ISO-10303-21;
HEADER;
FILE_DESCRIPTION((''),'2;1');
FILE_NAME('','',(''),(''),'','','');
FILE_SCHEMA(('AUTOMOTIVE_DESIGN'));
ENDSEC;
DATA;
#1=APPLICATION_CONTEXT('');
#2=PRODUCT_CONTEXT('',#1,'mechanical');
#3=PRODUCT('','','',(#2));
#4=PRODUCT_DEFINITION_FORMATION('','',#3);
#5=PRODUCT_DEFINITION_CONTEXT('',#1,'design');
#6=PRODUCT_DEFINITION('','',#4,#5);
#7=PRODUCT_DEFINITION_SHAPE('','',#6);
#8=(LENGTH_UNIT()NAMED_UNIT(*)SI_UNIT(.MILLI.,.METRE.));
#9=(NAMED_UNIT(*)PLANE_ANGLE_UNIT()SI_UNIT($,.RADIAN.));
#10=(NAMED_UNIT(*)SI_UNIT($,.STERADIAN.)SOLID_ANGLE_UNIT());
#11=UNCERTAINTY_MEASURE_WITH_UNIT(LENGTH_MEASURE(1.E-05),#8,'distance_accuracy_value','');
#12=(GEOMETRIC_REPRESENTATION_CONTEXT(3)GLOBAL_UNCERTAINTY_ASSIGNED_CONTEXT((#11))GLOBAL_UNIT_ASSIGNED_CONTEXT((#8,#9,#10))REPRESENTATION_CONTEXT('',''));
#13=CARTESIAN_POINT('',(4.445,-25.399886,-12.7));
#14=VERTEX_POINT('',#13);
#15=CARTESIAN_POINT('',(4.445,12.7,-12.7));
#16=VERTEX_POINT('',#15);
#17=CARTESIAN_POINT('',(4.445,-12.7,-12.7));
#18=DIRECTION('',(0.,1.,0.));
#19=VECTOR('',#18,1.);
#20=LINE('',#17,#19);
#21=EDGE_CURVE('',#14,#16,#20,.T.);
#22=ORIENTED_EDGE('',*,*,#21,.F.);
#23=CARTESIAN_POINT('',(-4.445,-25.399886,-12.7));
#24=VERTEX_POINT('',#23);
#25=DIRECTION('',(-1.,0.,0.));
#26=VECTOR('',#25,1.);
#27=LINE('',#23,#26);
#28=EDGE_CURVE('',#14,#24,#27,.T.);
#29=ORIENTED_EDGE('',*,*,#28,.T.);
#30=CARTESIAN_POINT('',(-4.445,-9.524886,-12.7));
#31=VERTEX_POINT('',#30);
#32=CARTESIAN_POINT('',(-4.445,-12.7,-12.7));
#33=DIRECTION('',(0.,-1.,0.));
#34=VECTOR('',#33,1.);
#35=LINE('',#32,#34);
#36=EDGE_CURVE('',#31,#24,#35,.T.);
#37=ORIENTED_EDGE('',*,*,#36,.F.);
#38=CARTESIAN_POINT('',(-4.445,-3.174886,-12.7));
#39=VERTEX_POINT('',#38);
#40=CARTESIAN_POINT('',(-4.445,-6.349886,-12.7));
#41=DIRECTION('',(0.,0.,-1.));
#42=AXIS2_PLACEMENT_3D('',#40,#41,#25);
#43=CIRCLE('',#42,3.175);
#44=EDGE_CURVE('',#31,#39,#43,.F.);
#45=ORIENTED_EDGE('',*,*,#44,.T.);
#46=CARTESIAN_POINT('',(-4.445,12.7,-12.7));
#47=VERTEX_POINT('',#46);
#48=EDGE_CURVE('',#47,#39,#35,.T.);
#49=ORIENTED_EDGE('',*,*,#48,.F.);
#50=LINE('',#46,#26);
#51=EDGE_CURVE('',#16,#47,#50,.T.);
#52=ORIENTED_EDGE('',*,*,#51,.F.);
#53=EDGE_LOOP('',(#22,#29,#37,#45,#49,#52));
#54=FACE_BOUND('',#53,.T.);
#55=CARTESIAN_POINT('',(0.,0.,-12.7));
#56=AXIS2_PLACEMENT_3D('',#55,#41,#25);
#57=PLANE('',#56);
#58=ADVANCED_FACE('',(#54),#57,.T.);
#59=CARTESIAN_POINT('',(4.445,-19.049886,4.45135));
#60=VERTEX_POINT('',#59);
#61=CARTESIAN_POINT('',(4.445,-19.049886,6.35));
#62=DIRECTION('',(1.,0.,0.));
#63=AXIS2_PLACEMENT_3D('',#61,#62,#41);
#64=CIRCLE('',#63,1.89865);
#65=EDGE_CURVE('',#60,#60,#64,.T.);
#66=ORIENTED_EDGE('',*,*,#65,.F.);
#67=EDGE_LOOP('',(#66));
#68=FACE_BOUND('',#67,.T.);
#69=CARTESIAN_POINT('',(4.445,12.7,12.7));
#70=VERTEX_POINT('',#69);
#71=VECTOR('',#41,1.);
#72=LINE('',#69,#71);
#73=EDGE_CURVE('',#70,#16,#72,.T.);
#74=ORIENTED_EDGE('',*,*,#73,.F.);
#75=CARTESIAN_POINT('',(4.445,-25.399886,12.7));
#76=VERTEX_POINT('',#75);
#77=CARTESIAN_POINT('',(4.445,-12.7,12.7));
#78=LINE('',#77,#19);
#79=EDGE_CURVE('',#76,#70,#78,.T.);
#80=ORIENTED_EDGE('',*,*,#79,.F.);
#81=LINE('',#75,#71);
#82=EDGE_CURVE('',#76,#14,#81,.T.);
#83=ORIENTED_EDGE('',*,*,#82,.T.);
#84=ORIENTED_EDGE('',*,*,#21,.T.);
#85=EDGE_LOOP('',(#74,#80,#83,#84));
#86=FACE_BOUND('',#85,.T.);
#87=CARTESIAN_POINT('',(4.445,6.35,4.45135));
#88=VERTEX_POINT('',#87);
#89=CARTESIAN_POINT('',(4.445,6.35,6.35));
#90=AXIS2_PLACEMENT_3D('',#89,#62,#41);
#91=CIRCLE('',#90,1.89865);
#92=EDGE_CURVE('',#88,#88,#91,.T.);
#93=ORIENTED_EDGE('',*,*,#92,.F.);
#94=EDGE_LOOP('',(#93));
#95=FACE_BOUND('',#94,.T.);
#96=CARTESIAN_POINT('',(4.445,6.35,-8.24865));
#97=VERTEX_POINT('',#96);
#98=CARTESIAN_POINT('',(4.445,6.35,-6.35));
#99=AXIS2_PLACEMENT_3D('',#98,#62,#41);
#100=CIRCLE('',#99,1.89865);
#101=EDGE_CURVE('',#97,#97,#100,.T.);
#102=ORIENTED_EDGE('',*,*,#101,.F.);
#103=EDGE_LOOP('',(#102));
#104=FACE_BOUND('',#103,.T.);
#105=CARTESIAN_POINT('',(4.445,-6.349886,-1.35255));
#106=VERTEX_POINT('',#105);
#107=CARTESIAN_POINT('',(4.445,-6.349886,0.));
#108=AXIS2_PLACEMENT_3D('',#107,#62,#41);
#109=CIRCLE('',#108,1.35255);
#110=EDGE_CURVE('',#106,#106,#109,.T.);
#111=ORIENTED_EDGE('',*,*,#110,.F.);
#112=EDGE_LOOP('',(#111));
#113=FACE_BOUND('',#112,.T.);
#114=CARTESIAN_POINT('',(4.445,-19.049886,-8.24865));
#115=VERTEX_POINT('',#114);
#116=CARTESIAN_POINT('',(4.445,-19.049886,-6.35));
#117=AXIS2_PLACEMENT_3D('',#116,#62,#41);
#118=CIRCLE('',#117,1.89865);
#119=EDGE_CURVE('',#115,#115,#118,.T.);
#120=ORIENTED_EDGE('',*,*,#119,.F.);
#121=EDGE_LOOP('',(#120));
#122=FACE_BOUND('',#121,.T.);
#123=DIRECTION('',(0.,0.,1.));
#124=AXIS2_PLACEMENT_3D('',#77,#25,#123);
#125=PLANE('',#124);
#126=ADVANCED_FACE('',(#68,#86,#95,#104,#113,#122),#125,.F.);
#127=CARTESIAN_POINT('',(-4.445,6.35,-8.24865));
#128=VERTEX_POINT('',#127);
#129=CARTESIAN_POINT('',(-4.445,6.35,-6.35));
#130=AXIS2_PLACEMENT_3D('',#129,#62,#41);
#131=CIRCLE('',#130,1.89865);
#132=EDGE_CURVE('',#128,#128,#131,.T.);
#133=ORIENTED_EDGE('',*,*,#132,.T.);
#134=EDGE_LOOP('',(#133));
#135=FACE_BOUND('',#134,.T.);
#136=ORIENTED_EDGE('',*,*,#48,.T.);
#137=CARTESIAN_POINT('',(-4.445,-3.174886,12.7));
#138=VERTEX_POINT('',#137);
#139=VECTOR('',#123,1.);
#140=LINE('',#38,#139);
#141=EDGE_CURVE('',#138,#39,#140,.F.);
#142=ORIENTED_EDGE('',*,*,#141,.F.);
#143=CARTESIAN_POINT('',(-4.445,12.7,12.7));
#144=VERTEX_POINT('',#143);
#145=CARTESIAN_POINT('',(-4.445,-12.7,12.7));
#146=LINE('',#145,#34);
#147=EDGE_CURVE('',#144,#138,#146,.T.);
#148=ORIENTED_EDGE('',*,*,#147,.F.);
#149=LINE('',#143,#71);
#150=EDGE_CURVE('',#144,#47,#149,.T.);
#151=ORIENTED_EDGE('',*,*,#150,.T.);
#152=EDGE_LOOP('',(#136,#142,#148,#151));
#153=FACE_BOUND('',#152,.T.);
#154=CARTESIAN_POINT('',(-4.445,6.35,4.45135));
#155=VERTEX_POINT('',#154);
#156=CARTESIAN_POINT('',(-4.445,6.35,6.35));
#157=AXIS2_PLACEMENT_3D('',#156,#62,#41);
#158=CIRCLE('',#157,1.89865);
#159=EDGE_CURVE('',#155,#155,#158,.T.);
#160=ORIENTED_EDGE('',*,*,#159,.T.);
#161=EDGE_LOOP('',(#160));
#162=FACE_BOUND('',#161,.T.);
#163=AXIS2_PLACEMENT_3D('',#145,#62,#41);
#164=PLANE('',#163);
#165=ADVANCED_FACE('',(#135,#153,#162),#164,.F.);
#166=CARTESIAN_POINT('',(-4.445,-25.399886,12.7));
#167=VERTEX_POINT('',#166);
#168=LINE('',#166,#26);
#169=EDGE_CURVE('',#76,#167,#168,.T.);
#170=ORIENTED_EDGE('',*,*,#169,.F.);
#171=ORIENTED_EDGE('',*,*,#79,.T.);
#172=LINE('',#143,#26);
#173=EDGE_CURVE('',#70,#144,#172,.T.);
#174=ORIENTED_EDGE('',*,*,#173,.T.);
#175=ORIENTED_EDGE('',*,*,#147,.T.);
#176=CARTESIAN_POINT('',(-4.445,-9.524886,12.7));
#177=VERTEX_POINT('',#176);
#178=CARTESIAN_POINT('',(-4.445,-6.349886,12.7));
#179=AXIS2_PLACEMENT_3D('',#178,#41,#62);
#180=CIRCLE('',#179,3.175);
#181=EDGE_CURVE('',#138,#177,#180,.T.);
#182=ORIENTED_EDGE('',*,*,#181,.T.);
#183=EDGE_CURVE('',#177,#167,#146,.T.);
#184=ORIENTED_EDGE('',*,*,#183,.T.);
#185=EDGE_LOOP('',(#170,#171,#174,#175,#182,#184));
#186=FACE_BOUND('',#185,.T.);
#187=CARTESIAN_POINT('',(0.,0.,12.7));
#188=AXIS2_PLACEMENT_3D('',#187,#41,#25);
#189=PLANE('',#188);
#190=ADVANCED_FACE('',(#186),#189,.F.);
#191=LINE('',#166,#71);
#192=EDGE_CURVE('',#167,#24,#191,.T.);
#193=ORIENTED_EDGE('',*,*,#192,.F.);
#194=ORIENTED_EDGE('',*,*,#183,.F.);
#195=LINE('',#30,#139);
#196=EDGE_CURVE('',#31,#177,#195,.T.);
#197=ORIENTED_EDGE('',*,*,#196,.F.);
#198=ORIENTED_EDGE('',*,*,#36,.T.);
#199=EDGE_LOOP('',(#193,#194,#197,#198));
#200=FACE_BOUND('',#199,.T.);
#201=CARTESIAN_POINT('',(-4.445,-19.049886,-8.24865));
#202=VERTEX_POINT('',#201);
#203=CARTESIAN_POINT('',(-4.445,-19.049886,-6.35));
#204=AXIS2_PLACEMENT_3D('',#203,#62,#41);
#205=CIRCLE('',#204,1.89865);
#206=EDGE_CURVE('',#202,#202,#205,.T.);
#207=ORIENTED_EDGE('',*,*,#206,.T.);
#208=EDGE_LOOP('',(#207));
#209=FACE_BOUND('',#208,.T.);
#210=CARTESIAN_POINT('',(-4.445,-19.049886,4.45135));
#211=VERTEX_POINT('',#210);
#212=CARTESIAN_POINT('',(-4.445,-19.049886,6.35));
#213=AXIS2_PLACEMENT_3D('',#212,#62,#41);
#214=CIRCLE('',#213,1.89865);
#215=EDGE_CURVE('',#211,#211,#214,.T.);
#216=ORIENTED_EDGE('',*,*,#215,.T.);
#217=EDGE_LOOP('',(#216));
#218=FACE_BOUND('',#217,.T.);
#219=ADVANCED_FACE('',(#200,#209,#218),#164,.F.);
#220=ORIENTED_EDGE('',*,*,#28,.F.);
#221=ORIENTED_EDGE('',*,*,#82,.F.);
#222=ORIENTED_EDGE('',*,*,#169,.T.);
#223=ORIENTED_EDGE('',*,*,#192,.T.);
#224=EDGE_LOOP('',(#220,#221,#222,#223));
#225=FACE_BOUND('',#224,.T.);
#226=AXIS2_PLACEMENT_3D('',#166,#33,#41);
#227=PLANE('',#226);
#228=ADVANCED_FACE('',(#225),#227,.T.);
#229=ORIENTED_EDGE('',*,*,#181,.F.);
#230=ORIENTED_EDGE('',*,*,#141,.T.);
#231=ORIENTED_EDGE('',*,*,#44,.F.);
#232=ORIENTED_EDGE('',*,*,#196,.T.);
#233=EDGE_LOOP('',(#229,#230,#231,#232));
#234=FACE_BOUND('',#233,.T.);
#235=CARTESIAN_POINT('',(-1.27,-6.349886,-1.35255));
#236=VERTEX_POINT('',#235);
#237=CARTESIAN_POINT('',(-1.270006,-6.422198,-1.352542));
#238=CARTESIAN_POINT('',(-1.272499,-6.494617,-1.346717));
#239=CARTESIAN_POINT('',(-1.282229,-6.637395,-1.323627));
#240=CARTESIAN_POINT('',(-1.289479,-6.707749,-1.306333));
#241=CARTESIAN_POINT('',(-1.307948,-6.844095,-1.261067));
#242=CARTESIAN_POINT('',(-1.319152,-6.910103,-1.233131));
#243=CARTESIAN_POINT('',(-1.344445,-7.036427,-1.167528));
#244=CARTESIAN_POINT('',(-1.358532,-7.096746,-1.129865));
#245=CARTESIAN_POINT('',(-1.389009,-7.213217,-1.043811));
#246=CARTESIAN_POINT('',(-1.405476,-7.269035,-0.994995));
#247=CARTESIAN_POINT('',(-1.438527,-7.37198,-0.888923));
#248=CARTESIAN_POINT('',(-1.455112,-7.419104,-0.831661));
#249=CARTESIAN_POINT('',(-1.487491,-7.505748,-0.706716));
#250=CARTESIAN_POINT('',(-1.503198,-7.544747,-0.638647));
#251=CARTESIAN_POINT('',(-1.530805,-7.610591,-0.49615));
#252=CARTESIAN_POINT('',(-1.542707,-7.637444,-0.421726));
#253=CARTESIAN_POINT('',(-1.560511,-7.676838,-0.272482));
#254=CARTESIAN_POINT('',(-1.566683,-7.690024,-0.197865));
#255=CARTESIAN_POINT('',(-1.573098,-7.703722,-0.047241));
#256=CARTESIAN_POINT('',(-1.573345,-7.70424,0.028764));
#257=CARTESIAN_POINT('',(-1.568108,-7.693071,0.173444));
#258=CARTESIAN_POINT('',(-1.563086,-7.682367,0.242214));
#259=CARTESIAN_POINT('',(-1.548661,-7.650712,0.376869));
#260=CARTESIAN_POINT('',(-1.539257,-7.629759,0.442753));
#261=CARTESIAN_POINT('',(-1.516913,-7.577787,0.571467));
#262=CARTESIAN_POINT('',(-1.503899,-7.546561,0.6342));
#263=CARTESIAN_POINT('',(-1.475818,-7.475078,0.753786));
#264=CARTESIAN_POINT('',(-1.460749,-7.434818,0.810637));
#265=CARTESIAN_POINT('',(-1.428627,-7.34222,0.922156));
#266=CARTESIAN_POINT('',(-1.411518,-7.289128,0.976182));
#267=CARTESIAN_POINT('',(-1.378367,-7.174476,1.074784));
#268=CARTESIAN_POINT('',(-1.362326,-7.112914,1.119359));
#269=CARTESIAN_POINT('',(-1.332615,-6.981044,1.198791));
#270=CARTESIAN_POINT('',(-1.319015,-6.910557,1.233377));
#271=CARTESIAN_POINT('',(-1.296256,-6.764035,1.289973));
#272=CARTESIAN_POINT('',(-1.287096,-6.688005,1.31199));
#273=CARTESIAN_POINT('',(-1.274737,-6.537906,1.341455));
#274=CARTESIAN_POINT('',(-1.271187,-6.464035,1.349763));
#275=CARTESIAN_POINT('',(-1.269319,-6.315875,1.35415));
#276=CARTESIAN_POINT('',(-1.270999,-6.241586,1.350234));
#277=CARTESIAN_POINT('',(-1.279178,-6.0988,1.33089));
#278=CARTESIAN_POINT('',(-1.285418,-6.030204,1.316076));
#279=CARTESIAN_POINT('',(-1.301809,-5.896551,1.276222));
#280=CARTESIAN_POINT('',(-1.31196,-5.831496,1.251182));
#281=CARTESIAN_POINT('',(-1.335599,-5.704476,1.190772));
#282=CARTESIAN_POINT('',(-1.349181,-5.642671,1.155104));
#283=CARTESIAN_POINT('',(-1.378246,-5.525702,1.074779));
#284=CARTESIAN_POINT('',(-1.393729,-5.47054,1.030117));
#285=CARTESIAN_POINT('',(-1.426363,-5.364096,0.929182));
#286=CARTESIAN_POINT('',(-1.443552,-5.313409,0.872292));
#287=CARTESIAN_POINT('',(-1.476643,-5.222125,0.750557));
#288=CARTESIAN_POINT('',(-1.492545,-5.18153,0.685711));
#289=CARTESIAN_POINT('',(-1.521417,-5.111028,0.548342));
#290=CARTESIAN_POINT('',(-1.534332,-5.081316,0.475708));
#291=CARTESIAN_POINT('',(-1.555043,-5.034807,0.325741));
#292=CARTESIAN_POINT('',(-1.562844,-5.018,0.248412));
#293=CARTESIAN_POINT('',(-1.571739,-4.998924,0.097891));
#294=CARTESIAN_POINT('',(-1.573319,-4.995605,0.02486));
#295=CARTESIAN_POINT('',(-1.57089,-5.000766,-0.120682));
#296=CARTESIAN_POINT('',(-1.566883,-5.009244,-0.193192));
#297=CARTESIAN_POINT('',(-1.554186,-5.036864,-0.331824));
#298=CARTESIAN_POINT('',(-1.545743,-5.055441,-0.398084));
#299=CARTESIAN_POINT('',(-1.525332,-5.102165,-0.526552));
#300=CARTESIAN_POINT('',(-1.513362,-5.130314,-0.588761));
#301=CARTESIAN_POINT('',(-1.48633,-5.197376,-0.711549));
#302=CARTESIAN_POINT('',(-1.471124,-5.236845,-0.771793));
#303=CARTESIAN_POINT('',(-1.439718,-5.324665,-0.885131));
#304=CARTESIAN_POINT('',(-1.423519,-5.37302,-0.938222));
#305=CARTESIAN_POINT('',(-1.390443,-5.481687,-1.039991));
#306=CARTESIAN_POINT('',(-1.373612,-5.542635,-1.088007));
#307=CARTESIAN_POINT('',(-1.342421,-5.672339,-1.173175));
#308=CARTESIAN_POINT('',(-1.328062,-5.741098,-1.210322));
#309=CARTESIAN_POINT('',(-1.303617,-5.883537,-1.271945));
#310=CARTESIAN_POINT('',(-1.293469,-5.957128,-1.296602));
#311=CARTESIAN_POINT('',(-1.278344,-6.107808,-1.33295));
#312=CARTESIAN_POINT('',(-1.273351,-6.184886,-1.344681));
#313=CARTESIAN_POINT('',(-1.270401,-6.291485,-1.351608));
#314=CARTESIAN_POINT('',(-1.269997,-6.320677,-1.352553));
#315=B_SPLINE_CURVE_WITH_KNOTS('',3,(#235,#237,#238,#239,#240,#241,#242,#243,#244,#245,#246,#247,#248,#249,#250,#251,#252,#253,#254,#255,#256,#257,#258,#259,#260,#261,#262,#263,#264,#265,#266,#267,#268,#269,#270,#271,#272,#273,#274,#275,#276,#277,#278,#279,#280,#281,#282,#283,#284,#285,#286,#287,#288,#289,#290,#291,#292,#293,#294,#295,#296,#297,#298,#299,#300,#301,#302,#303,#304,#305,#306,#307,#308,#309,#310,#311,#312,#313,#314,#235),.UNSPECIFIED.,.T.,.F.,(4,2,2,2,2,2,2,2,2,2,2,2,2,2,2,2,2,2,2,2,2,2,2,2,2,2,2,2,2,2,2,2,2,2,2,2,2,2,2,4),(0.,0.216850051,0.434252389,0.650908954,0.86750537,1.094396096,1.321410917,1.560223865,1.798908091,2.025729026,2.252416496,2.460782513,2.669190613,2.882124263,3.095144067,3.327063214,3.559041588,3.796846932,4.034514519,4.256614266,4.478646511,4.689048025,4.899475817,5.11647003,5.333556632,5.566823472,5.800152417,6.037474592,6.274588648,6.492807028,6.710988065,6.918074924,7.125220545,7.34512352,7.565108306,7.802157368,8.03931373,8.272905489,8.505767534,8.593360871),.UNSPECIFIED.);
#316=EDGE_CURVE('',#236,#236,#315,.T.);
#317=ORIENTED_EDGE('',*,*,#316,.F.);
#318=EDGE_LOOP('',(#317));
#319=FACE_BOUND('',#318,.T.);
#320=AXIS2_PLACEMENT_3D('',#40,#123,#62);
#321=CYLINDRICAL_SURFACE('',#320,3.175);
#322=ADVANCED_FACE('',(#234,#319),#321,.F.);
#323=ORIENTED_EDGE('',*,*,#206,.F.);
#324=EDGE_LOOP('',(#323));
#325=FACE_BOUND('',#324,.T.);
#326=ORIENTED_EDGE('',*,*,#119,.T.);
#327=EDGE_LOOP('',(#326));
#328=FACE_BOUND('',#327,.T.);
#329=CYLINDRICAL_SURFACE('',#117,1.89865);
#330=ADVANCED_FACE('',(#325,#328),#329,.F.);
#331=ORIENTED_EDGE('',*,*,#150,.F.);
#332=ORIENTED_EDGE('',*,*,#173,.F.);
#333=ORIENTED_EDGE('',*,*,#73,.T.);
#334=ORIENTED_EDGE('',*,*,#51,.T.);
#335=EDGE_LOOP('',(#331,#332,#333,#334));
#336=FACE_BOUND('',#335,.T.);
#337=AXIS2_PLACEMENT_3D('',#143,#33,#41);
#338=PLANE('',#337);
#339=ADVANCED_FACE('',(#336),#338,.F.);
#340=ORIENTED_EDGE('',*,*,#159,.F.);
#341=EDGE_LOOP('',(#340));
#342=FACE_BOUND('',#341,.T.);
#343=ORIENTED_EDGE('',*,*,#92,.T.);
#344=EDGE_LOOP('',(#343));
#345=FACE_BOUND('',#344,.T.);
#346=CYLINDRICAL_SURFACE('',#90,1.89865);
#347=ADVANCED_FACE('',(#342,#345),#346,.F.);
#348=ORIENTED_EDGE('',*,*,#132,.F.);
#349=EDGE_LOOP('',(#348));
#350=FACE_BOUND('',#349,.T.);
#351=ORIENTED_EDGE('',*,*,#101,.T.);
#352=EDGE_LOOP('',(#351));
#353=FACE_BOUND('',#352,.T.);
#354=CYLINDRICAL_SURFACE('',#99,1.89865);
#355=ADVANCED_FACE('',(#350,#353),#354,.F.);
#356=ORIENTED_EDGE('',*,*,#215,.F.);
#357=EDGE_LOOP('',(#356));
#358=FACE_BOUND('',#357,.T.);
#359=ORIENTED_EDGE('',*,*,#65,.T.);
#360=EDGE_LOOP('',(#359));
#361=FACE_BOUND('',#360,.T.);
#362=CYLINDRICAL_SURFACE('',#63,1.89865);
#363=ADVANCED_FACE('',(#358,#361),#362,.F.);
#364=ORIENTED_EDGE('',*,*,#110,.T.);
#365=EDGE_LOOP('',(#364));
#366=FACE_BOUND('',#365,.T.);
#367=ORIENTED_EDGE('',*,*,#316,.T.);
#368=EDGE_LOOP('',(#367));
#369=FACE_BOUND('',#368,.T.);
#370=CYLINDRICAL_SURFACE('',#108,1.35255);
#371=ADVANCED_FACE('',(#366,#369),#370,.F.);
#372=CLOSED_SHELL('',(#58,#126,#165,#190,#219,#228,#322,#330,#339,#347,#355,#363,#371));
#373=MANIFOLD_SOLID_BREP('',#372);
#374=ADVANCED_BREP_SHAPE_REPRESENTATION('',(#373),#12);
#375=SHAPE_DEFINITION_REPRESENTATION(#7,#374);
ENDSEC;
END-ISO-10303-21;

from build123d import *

# Parameters (mm, degrees)
SKETCH1_W             = 8.89
SKETCH1_H             = 25.4
BOSS_EXTRUDE1_DEPTH   = 12.7
SKETCH2_R             = 3.175
CUT_EXTRUDE1_DEPTH    = 25.4
F_6_CLEARANCE_HOLE2_D = 3.7973
F_6_32_TAPPED_HOLE1_D = 2.7051


with BuildPart() as part:
    # Sketch1 → Boss-Extrude1 (new, symmetric)
    with BuildSketch(Plane.XY):
        Rectangle(SKETCH1_W, SKETCH1_H)
    boss_extrude1 = extrude(amount=BOSS_EXTRUDE1_DEPTH, both=True)

    # Sketch2 → Cut-Extrude1 (cut)
    with BuildSketch(Plane.XY.offset(12.7)):
        with Locations((-4.445, -6.35)):
            Circle(SKETCH2_R)
    cut_extrude1 = extrude(amount=-CUT_EXTRUDE1_DEPTH, mode=Mode.SUBTRACT)

    # #6 Clearance Hole2 (through all)
    with Locations(Plane(origin=(4.445, 0, 0), x_dir=(0, 0, -1), z_dir=(1, 0, 0))):
        with Locations((-6.35, 6.35), (6.35, 6.35)):
            f_6_clearance_hole2 = Hole(F_6_CLEARANCE_HOLE2_D / 2)

    # #6-32 Tapped Hole1 (through all)
    with Locations(Plane(origin=(4.445, 0, 0), x_dir=(0, 0, -1), z_dir=(1, 0, 0))):
        with Locations((0, -6.35)):
            f_6_32_tapped_hole1 = Hole(F_6_32_TAPPED_HOLE1_D / 2)

    # Mirror1: Boss-Extrude1, Cut-Extrude1, #6 Clearance Hole2, #6-32 Tapped Hole1 across plane
    add(boss_extrude1.mirror(Plane.ZX.offset(-6.349943242)))
    add(cut_extrude1.mirror(Plane.ZX.offset(-6.349943242)), mode=Mode.SUBTRACT)
    add(f_6_clearance_hole2.mirror(Plane.ZX.offset(-6.349943242)), mode=Mode.SUBTRACT)
    add(f_6_32_tapped_hole1.mirror(Plane.ZX.offset(-6.349943242)), mode=Mode.SUBTRACT)


solid = part.part
